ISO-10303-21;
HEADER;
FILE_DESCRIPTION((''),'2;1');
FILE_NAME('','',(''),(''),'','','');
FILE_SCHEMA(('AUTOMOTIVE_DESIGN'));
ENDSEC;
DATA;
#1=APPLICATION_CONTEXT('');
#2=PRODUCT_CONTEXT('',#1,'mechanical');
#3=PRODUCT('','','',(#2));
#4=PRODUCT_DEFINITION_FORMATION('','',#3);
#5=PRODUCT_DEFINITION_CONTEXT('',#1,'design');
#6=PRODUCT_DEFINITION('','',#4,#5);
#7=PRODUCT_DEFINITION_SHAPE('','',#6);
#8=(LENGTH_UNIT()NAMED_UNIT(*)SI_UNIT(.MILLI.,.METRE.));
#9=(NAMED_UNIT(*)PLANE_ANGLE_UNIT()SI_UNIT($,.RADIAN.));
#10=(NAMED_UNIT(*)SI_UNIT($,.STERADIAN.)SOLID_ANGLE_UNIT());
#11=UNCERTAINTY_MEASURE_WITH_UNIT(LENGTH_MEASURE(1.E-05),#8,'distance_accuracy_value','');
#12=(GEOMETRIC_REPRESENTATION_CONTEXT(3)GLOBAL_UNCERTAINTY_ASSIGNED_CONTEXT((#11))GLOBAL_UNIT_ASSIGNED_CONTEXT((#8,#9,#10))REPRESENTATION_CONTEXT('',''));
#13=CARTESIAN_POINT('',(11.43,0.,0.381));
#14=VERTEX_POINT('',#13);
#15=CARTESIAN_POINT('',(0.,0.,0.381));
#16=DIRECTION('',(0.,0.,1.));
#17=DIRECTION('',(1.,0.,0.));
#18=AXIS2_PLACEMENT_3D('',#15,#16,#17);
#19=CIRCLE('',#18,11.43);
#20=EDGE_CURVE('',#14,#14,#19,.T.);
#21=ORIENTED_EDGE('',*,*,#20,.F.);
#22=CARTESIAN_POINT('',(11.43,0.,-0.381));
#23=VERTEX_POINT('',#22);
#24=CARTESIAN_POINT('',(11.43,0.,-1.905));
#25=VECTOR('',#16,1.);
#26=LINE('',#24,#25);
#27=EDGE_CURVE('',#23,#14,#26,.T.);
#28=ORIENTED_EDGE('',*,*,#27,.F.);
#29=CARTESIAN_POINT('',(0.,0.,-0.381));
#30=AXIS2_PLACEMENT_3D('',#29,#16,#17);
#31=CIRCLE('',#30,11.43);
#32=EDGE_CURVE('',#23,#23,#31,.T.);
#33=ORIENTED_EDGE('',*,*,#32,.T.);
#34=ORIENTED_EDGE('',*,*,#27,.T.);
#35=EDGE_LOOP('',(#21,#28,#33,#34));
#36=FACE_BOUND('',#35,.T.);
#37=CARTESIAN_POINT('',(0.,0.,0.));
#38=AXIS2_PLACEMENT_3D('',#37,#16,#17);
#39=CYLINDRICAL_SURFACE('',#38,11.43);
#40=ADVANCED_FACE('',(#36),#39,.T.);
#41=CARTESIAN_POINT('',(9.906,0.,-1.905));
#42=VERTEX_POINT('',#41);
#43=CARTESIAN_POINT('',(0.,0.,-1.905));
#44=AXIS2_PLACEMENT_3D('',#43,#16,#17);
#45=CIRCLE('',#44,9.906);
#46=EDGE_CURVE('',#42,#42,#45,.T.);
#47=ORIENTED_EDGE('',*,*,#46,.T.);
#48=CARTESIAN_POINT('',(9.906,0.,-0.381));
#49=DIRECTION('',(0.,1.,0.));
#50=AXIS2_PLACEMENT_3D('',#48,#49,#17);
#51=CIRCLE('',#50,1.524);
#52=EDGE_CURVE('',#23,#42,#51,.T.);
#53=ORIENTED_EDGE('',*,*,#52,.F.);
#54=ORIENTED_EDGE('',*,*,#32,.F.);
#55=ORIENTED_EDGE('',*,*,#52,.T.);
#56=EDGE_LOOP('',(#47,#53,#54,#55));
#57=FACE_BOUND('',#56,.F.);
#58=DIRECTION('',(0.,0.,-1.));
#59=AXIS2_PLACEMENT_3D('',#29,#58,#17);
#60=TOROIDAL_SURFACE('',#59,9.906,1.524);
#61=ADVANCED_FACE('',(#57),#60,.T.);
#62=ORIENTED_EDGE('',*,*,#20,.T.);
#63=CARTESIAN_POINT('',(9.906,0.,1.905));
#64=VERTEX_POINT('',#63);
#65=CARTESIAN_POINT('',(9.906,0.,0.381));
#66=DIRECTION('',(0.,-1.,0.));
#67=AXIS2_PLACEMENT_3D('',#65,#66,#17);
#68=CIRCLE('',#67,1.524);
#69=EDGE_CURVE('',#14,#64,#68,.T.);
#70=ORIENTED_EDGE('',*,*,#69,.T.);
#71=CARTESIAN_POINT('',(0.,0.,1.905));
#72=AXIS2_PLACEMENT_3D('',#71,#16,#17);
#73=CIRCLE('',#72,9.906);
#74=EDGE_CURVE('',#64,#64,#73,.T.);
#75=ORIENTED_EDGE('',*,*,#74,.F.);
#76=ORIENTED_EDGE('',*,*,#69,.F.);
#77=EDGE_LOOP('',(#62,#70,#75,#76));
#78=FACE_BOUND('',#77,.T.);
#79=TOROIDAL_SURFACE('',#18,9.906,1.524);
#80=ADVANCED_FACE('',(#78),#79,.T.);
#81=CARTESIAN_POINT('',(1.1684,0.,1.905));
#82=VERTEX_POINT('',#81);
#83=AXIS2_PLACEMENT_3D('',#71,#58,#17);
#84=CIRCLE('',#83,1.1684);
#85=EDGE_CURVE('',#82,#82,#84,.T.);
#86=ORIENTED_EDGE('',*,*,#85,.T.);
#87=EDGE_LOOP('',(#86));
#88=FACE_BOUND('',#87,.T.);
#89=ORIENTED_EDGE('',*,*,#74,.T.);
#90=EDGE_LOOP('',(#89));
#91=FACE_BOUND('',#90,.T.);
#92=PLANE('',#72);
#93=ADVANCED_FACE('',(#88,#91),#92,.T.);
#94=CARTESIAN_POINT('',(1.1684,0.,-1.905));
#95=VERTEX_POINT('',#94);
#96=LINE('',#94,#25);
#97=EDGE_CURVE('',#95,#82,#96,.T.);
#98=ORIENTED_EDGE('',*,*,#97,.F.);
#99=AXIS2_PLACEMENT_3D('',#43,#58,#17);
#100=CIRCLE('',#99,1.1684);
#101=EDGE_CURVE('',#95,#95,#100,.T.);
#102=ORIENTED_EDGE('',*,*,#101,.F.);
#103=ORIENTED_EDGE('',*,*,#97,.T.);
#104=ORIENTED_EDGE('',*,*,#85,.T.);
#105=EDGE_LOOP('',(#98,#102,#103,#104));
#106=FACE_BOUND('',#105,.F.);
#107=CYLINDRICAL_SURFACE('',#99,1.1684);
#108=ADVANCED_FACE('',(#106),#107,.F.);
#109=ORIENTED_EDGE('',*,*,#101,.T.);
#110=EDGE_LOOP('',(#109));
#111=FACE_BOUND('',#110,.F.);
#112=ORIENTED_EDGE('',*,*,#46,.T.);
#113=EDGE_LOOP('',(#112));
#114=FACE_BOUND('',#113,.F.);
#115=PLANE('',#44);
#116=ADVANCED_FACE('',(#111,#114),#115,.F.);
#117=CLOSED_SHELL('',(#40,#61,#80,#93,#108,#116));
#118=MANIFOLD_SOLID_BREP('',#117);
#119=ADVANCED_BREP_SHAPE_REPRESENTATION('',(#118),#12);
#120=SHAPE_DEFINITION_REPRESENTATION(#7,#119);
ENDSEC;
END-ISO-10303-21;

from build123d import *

# Parameters (mm, degrees)
F0_R     = 11.43
F1_DEPTH = 1.905
F2_R     = 1.1684
F3_DEPTH = 25.4
F4_R     = 1.524


with BuildPart() as f1:
    # F0 (on Top) → F1 (new body, symmetric)
    with BuildSketch(Plane.XY):
        Circle(F0_R)
    extrude(amount=F1_DEPTH, both=True)

    # F2 (on face) → F3 (cut)
    with BuildSketch(Plane(origin=(0, 0, -1.905), x_dir=(1, 0, 0), z_dir=(0, 0, -1))):
        Circle(F2_R)
    extrude(amount=-F3_DEPTH, mode=Mode.SUBTRACT)

    # F4
    f4_edges = [f1.edges().sort_by_distance(p)[0] for p in [
        (-11.43, 0, 1.905),
        (-11.43, 0, -1.905),
    ]]
    fillet(f4_edges, radius=F4_R)


solid = f1.part
